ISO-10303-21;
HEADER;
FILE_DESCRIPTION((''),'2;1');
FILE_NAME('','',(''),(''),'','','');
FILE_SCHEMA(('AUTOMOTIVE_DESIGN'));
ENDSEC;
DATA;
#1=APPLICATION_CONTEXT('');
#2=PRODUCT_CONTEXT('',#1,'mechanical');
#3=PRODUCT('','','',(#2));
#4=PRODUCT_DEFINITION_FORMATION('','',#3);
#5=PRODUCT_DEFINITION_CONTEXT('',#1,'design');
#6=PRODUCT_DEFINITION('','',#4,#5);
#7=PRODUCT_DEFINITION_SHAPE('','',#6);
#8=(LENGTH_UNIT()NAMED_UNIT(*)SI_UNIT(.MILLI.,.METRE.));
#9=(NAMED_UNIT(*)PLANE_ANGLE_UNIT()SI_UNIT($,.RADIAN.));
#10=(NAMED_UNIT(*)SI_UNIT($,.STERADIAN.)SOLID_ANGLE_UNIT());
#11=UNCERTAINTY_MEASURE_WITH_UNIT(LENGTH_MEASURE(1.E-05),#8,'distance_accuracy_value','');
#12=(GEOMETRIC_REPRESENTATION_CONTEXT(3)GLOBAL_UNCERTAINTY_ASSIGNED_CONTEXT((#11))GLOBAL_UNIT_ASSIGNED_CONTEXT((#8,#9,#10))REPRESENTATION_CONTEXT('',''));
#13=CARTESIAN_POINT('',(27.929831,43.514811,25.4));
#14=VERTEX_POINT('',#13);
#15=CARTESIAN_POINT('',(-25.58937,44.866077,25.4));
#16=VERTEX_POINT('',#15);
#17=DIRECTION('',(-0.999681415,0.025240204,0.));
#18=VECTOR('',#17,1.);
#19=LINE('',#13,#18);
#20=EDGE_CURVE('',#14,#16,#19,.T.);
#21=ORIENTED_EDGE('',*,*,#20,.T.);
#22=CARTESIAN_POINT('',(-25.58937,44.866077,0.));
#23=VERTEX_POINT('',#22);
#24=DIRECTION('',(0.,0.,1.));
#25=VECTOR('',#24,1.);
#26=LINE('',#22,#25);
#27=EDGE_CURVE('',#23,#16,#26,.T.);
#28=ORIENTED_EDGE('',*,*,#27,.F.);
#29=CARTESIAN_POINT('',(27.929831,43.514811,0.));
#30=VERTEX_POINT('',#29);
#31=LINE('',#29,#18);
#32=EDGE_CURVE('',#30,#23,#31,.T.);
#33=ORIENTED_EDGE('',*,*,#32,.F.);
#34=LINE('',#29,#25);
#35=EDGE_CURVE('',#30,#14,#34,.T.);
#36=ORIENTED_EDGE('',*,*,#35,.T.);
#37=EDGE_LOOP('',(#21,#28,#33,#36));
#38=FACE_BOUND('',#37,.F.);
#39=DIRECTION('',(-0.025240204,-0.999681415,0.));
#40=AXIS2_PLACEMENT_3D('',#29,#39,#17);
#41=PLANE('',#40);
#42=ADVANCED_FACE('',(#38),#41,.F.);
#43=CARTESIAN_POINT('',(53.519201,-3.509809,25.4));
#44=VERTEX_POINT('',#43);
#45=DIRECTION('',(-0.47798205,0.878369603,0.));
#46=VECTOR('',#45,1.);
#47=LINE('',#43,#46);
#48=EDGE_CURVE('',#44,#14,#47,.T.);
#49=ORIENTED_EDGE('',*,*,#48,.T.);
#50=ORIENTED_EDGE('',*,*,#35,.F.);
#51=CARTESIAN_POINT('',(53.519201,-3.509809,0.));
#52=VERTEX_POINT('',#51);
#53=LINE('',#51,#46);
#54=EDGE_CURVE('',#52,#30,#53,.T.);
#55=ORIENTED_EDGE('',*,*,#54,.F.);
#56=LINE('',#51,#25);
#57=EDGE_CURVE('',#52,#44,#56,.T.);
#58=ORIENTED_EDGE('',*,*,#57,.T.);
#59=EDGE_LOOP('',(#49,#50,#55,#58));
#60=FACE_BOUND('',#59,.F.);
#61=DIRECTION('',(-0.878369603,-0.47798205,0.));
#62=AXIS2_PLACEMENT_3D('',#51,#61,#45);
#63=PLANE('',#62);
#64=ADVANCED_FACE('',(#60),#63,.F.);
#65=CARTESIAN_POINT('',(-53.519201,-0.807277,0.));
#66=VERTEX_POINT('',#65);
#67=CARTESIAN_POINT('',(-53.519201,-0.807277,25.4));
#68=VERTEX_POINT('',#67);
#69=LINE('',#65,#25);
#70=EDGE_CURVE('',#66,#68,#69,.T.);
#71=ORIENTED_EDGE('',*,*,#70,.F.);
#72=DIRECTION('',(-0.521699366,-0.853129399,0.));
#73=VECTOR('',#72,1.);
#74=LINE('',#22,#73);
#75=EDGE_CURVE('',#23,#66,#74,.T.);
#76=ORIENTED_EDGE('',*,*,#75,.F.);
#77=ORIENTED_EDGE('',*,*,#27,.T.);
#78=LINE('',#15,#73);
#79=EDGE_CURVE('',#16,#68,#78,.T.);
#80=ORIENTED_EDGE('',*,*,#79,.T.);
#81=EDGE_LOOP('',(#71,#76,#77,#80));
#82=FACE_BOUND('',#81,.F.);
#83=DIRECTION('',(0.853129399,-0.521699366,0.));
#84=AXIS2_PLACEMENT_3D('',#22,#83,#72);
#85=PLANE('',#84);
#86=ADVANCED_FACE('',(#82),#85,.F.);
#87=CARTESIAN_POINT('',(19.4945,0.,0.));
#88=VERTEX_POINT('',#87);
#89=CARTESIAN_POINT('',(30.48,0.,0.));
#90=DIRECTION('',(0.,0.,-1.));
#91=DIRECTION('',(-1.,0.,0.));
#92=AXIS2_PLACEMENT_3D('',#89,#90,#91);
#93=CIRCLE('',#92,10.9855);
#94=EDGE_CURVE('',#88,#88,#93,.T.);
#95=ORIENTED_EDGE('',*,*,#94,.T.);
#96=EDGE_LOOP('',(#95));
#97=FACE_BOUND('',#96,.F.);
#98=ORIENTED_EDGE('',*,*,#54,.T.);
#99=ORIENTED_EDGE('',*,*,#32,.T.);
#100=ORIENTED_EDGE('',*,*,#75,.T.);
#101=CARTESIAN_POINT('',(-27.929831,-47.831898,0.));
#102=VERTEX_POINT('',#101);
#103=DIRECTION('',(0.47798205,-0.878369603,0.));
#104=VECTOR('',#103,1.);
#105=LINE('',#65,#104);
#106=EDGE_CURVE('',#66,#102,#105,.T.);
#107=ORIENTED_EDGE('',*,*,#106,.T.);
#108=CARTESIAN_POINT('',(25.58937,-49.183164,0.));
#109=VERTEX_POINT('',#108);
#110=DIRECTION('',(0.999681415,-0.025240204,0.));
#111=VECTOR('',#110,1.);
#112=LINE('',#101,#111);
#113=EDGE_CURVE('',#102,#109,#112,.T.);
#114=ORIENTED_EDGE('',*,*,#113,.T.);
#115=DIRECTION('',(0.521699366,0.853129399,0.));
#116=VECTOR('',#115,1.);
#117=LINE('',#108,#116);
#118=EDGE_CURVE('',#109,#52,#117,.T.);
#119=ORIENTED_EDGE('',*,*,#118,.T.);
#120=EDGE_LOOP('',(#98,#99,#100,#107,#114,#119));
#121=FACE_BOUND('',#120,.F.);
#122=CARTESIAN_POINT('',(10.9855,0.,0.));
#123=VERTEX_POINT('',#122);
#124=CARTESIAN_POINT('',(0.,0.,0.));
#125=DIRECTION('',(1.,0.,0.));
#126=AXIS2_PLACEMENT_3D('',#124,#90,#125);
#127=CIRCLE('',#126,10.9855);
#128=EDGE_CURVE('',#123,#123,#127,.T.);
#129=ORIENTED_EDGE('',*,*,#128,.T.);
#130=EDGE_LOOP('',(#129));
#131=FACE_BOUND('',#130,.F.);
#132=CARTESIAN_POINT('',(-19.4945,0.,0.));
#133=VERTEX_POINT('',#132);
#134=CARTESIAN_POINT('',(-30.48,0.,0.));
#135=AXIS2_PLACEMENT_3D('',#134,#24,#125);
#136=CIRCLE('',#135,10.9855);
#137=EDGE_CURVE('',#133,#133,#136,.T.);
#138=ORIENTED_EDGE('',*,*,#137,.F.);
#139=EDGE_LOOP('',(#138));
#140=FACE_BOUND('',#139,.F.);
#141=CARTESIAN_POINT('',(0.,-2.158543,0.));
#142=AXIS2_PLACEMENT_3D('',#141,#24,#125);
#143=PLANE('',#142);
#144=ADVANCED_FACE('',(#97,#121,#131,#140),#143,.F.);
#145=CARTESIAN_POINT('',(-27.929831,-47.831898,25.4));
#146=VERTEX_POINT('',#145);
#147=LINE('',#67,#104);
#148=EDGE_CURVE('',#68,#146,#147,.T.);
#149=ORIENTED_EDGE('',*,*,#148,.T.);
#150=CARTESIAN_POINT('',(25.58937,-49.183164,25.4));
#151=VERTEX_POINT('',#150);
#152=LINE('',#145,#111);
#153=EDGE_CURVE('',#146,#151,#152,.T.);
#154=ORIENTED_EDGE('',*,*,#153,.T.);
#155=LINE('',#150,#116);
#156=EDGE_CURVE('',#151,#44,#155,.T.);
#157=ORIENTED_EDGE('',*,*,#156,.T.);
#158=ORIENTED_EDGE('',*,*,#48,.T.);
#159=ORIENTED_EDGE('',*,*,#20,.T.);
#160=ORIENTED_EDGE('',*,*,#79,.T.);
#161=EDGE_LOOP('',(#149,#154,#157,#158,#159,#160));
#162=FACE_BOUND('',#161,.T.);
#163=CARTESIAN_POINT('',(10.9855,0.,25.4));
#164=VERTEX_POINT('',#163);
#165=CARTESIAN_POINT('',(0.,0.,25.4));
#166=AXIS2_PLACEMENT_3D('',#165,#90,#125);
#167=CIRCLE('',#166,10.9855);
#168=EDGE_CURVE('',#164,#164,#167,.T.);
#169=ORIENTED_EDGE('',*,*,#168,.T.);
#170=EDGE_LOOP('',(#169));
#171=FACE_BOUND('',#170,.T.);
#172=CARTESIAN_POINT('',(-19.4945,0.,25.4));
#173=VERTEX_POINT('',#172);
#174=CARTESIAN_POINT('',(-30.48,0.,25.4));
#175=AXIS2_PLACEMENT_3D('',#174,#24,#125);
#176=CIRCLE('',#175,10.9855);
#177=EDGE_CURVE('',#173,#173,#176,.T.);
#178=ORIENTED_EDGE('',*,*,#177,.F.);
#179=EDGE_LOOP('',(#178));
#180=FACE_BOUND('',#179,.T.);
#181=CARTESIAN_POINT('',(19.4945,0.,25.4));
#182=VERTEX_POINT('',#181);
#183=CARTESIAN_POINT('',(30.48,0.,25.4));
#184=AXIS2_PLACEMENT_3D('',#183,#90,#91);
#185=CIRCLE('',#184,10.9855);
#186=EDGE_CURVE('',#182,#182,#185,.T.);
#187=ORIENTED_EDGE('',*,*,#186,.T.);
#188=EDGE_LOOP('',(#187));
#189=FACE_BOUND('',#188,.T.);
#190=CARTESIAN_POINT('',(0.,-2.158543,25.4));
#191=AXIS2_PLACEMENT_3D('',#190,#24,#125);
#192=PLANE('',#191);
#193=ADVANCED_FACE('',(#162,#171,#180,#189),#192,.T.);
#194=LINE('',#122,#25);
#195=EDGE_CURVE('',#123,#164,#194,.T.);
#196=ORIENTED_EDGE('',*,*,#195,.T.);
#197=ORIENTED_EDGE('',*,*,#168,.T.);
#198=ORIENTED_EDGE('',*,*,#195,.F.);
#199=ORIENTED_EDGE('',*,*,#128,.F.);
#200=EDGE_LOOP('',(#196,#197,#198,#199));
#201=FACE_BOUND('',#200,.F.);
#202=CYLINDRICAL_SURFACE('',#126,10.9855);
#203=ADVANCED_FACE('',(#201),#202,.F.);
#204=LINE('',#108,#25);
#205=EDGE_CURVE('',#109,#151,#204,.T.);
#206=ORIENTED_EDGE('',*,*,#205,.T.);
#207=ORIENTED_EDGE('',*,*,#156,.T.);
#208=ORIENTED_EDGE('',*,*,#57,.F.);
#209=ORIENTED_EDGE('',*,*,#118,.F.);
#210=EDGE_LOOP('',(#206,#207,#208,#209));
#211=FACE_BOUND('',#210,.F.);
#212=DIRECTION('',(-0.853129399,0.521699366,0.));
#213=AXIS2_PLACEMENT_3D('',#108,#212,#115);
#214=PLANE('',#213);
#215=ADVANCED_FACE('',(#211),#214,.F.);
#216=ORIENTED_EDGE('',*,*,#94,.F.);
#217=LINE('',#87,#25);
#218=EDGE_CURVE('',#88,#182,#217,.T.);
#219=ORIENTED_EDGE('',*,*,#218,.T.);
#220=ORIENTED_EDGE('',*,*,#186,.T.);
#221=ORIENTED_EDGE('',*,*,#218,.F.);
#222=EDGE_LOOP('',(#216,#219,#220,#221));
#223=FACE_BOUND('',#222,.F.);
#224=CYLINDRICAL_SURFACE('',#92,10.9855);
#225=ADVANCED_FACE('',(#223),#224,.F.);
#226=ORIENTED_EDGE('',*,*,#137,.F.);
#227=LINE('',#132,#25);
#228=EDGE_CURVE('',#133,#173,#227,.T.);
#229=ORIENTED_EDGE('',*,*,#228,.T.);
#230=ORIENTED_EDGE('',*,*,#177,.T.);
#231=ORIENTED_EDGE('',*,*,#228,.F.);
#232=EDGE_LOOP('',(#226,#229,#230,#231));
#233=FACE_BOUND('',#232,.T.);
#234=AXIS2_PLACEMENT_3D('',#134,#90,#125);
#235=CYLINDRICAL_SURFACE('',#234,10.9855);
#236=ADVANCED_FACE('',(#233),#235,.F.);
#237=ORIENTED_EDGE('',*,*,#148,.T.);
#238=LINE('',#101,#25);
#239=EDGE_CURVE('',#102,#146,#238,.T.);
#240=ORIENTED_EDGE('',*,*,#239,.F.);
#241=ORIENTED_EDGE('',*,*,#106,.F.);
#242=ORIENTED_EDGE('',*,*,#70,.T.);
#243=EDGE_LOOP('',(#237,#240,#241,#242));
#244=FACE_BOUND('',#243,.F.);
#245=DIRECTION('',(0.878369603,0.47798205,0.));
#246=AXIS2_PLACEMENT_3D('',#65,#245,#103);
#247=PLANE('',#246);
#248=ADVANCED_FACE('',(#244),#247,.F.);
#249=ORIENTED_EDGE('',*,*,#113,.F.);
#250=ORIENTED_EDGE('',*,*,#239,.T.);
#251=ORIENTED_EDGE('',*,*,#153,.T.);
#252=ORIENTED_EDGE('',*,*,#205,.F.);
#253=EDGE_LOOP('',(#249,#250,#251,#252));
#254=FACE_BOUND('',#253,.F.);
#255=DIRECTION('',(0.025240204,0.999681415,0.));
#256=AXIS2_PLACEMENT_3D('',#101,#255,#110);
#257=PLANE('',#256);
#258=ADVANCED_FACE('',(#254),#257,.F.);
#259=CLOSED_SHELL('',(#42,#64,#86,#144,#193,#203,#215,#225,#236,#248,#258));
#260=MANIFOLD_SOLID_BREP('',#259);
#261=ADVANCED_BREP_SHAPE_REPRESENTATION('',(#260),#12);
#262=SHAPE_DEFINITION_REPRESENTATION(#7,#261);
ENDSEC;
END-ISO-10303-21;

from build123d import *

# Parameters (mm, degrees)
F0_R     = 10.9855
F1_DEPTH = 25.4


# Not quite as in the source:
# - a feature names something its author has since deleted; it is built from what else it names


with BuildPart() as f1:
    # F0 (on Top) → F1 (new body)
    with BuildSketch(Plane.XY):
        Polygon((53.519200738, -3.5098091407), (27.9298310918, 43.5148113115), (-25.5893696461, 44.8660773572), (-53.519200738, -0.8072770493), (-27.9298310918, -47.8318975015), (25.5893696461, -49.1831635472), align=None)
        with Locations((-30.48, 0)):
            Circle(F0_R, mode=Mode.SUBTRACT)
        with BuildLine():
            ThreePointArc((-10.9855, 0), (0, 10.9855), (10.9855, 0))
            ThreePointArc((10.9855, 0), (0, -10.9855), (-10.9855, 0))
        make_face(mode=Mode.SUBTRACT)
        with BuildLine():
            ThreePointArc((41.4655, 0), (30.48, -10.9855), (19.4945, 0))
            ThreePointArc((19.4945, 0), (30.48, 10.9855), (41.4655, 0))
        make_face(mode=Mode.SUBTRACT)
    extrude(amount=F1_DEPTH)


solid = f1.part
